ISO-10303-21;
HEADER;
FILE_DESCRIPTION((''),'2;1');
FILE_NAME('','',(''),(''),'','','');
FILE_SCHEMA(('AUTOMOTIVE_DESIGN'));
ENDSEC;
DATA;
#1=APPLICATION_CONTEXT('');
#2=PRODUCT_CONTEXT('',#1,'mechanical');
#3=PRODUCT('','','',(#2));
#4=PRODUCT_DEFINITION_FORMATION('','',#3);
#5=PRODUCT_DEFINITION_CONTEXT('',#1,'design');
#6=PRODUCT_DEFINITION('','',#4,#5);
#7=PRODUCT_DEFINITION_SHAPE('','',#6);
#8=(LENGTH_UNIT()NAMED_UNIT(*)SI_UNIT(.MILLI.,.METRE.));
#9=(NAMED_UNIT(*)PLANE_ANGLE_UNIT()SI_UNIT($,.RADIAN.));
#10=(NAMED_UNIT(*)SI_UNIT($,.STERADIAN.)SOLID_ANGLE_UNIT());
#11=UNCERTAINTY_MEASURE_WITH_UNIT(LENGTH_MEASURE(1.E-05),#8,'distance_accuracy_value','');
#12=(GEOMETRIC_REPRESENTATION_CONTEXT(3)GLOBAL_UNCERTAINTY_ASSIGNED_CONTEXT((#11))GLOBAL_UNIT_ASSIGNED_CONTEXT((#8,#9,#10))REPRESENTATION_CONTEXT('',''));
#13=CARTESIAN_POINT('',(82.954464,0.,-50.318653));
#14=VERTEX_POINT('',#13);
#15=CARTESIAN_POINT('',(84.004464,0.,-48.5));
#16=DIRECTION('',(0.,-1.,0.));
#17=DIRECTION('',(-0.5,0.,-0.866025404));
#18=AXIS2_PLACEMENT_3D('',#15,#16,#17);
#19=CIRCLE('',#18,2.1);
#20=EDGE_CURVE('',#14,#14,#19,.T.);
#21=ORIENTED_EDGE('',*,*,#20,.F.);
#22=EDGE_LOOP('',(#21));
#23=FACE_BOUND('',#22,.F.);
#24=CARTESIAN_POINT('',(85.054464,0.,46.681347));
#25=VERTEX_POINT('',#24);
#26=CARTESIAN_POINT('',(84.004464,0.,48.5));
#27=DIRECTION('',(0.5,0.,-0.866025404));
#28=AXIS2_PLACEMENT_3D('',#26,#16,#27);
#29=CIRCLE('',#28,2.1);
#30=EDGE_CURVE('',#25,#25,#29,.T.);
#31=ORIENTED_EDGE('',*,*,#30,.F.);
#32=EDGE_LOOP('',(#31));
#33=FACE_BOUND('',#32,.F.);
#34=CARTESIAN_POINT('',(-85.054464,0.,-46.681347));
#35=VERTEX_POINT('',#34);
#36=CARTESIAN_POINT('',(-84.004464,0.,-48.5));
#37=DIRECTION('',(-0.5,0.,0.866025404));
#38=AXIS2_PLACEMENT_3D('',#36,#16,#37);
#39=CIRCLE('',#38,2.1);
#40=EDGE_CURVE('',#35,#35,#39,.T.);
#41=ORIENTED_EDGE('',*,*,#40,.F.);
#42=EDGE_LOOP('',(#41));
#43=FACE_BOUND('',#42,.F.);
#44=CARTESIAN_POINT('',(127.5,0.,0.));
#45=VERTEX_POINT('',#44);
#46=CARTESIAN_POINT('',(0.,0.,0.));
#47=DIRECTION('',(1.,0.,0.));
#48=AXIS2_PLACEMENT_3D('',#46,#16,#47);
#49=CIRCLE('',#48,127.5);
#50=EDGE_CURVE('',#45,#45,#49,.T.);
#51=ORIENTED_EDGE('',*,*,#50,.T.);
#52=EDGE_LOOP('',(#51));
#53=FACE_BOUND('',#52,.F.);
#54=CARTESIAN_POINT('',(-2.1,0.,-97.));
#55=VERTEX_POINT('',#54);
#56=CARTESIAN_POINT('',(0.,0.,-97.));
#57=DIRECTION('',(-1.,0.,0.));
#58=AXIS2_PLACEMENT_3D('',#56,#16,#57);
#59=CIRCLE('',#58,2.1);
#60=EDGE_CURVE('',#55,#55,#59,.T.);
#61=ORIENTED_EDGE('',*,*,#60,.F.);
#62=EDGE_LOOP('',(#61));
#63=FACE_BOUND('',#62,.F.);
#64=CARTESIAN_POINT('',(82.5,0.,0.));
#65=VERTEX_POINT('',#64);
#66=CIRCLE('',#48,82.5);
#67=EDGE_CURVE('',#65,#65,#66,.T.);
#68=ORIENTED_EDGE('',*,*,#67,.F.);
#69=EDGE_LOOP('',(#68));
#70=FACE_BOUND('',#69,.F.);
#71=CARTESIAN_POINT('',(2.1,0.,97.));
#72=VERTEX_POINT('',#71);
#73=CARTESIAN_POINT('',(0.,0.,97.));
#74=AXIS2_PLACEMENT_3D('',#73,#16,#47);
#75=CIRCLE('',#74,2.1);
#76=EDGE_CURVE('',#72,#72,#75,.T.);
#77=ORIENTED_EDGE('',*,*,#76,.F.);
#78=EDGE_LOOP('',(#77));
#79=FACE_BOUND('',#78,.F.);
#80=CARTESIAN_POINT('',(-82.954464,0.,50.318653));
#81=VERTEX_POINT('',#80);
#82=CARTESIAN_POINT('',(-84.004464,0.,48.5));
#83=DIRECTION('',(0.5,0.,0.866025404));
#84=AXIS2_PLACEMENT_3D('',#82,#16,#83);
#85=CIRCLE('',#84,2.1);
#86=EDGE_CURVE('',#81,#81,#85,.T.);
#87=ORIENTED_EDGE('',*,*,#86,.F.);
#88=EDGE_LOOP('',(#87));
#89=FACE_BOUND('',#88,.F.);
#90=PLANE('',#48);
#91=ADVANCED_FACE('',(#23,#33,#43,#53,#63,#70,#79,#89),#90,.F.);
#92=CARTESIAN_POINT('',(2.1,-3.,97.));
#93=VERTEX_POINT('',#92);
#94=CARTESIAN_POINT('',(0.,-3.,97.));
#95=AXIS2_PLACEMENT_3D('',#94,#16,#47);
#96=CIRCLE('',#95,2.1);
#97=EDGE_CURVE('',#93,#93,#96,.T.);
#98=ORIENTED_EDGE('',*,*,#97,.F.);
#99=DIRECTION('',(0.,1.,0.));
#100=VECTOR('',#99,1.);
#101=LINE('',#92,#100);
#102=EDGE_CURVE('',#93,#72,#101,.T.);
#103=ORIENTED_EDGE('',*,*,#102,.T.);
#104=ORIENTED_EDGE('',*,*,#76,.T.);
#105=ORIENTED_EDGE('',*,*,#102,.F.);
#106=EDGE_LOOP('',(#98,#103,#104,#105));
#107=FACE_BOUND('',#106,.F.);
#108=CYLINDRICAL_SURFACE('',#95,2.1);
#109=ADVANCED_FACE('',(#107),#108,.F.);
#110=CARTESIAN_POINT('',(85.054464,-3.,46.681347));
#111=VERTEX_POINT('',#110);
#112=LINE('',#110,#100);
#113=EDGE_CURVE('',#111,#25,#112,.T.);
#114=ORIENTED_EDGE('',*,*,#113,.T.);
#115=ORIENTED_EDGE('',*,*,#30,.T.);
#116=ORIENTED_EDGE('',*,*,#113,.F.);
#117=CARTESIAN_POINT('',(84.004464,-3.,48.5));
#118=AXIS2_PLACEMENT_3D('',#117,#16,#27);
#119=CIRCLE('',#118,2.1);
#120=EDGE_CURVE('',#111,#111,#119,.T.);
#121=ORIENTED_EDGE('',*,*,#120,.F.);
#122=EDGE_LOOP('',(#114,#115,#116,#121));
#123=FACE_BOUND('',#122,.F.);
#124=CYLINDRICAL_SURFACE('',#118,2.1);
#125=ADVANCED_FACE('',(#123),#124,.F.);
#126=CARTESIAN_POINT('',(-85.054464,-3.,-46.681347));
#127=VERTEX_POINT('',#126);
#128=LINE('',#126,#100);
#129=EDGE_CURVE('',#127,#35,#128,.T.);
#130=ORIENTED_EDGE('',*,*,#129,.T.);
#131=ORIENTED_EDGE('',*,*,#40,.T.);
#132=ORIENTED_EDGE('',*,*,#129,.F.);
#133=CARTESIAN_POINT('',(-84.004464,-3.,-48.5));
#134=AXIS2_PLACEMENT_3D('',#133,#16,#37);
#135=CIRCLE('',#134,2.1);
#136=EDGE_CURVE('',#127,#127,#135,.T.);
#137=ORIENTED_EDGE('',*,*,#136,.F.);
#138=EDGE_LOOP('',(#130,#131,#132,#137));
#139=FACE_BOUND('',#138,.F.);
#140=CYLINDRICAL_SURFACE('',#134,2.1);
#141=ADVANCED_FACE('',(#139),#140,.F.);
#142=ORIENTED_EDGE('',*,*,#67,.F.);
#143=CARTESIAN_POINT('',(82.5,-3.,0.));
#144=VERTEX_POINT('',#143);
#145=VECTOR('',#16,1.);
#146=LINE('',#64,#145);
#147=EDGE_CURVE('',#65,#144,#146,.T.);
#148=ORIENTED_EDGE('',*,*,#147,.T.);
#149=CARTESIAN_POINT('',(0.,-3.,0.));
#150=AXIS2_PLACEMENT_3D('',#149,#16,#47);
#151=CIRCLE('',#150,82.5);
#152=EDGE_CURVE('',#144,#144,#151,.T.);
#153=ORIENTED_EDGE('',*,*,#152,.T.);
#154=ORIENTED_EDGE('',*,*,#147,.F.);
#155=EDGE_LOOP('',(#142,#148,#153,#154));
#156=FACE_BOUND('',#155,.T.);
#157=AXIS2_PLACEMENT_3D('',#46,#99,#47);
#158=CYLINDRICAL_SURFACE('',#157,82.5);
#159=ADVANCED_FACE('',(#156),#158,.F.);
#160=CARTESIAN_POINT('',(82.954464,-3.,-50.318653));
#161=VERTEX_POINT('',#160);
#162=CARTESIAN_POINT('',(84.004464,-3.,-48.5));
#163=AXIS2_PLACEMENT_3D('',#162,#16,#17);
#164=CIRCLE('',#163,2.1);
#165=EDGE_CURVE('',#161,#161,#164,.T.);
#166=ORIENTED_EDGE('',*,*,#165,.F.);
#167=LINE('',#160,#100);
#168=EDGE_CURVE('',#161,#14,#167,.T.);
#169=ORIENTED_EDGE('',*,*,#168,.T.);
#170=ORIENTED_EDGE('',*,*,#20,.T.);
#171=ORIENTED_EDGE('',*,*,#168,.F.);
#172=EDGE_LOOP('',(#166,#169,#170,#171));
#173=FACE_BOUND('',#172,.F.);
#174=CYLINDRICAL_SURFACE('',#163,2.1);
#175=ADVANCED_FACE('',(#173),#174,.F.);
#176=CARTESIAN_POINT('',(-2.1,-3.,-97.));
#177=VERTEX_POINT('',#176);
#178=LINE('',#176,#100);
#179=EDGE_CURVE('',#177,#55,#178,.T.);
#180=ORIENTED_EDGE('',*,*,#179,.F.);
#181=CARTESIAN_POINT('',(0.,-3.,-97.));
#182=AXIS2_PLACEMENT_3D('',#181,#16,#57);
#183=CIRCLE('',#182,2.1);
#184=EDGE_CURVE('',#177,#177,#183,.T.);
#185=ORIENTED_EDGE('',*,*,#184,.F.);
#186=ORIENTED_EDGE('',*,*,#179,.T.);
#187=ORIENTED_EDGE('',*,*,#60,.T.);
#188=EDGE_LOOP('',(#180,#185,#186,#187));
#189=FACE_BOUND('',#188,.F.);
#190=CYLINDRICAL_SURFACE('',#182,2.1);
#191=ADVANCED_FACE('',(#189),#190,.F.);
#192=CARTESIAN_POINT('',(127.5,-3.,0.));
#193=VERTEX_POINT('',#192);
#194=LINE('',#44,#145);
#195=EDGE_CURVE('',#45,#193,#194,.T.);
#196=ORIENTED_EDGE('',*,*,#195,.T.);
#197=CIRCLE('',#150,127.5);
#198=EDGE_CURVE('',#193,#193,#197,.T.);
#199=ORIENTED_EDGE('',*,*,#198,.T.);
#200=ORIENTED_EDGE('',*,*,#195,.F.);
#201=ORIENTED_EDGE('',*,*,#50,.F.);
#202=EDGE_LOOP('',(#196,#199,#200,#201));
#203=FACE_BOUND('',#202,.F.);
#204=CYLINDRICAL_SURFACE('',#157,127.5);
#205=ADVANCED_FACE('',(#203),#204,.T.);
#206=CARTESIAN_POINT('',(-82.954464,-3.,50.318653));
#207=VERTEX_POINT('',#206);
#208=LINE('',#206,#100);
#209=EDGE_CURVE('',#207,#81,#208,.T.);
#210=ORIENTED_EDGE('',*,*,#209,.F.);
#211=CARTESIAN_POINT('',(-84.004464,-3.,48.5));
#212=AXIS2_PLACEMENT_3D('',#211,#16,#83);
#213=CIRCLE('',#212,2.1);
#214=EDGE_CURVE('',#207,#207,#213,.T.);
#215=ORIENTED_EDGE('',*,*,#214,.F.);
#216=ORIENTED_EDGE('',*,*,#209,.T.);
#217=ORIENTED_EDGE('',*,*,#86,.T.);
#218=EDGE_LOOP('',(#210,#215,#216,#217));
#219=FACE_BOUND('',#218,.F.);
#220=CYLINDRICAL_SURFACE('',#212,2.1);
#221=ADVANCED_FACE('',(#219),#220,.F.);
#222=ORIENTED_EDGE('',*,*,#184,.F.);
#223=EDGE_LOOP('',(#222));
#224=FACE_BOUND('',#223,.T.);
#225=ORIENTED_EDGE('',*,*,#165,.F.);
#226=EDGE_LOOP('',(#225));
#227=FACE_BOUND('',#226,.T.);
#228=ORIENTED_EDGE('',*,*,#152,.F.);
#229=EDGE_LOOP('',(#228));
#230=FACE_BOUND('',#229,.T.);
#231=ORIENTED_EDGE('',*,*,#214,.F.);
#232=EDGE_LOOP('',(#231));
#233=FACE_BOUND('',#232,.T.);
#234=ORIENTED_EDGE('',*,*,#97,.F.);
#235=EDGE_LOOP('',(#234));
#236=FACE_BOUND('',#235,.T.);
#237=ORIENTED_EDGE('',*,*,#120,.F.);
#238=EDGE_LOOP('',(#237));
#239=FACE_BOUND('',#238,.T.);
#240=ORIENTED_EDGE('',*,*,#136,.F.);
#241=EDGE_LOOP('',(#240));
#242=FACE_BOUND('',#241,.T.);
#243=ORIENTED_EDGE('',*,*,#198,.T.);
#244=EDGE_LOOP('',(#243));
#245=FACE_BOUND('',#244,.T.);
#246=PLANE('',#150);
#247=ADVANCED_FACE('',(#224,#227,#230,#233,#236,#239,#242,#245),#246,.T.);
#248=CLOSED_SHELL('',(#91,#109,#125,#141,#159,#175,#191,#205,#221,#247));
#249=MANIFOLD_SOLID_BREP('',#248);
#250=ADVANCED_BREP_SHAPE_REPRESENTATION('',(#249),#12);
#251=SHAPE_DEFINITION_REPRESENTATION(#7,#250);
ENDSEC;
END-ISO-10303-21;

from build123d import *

# Parameters (mm, degrees)
F0_R            = 127.5
F0_R_2          = 82.5
F1_DEPTH        = 3
F2_R            = 2.1
F3_DEPTH        = 3
F3_COPIES_COUNT = 6


# Not quite as in the source:
# - a pattern or mirror of a feature is missing from the dataset's text; its kind, count and spacing are read off the source's solid


with BuildPart() as f1:
    # F0 (on Front) → F1 (new body)
    with BuildSketch(Plane.XZ):
        Circle(F0_R)
        Circle(F0_R_2, mode=Mode.SUBTRACT)
    extrude(amount=F1_DEPTH)

    # F2 (on face) → F3 (cut, through all)
    with BuildSketch(Plane.XZ.offset(3)):
        with Locations((0, 97)):
            Circle(F2_R)
    f3 = extrude(amount=-F3_DEPTH, mode=Mode.SUBTRACT)

    # F3_copies: F3 ×6 about axis
    f3_copies_axis = Axis((0, 0, 0), (0, 1, 0))
    for i in range(1, F3_COPIES_COUNT):
        add(f3.rotate(f3_copies_axis, i * 360 / F3_COPIES_COUNT), mode=Mode.SUBTRACT)


solid = f1.part
